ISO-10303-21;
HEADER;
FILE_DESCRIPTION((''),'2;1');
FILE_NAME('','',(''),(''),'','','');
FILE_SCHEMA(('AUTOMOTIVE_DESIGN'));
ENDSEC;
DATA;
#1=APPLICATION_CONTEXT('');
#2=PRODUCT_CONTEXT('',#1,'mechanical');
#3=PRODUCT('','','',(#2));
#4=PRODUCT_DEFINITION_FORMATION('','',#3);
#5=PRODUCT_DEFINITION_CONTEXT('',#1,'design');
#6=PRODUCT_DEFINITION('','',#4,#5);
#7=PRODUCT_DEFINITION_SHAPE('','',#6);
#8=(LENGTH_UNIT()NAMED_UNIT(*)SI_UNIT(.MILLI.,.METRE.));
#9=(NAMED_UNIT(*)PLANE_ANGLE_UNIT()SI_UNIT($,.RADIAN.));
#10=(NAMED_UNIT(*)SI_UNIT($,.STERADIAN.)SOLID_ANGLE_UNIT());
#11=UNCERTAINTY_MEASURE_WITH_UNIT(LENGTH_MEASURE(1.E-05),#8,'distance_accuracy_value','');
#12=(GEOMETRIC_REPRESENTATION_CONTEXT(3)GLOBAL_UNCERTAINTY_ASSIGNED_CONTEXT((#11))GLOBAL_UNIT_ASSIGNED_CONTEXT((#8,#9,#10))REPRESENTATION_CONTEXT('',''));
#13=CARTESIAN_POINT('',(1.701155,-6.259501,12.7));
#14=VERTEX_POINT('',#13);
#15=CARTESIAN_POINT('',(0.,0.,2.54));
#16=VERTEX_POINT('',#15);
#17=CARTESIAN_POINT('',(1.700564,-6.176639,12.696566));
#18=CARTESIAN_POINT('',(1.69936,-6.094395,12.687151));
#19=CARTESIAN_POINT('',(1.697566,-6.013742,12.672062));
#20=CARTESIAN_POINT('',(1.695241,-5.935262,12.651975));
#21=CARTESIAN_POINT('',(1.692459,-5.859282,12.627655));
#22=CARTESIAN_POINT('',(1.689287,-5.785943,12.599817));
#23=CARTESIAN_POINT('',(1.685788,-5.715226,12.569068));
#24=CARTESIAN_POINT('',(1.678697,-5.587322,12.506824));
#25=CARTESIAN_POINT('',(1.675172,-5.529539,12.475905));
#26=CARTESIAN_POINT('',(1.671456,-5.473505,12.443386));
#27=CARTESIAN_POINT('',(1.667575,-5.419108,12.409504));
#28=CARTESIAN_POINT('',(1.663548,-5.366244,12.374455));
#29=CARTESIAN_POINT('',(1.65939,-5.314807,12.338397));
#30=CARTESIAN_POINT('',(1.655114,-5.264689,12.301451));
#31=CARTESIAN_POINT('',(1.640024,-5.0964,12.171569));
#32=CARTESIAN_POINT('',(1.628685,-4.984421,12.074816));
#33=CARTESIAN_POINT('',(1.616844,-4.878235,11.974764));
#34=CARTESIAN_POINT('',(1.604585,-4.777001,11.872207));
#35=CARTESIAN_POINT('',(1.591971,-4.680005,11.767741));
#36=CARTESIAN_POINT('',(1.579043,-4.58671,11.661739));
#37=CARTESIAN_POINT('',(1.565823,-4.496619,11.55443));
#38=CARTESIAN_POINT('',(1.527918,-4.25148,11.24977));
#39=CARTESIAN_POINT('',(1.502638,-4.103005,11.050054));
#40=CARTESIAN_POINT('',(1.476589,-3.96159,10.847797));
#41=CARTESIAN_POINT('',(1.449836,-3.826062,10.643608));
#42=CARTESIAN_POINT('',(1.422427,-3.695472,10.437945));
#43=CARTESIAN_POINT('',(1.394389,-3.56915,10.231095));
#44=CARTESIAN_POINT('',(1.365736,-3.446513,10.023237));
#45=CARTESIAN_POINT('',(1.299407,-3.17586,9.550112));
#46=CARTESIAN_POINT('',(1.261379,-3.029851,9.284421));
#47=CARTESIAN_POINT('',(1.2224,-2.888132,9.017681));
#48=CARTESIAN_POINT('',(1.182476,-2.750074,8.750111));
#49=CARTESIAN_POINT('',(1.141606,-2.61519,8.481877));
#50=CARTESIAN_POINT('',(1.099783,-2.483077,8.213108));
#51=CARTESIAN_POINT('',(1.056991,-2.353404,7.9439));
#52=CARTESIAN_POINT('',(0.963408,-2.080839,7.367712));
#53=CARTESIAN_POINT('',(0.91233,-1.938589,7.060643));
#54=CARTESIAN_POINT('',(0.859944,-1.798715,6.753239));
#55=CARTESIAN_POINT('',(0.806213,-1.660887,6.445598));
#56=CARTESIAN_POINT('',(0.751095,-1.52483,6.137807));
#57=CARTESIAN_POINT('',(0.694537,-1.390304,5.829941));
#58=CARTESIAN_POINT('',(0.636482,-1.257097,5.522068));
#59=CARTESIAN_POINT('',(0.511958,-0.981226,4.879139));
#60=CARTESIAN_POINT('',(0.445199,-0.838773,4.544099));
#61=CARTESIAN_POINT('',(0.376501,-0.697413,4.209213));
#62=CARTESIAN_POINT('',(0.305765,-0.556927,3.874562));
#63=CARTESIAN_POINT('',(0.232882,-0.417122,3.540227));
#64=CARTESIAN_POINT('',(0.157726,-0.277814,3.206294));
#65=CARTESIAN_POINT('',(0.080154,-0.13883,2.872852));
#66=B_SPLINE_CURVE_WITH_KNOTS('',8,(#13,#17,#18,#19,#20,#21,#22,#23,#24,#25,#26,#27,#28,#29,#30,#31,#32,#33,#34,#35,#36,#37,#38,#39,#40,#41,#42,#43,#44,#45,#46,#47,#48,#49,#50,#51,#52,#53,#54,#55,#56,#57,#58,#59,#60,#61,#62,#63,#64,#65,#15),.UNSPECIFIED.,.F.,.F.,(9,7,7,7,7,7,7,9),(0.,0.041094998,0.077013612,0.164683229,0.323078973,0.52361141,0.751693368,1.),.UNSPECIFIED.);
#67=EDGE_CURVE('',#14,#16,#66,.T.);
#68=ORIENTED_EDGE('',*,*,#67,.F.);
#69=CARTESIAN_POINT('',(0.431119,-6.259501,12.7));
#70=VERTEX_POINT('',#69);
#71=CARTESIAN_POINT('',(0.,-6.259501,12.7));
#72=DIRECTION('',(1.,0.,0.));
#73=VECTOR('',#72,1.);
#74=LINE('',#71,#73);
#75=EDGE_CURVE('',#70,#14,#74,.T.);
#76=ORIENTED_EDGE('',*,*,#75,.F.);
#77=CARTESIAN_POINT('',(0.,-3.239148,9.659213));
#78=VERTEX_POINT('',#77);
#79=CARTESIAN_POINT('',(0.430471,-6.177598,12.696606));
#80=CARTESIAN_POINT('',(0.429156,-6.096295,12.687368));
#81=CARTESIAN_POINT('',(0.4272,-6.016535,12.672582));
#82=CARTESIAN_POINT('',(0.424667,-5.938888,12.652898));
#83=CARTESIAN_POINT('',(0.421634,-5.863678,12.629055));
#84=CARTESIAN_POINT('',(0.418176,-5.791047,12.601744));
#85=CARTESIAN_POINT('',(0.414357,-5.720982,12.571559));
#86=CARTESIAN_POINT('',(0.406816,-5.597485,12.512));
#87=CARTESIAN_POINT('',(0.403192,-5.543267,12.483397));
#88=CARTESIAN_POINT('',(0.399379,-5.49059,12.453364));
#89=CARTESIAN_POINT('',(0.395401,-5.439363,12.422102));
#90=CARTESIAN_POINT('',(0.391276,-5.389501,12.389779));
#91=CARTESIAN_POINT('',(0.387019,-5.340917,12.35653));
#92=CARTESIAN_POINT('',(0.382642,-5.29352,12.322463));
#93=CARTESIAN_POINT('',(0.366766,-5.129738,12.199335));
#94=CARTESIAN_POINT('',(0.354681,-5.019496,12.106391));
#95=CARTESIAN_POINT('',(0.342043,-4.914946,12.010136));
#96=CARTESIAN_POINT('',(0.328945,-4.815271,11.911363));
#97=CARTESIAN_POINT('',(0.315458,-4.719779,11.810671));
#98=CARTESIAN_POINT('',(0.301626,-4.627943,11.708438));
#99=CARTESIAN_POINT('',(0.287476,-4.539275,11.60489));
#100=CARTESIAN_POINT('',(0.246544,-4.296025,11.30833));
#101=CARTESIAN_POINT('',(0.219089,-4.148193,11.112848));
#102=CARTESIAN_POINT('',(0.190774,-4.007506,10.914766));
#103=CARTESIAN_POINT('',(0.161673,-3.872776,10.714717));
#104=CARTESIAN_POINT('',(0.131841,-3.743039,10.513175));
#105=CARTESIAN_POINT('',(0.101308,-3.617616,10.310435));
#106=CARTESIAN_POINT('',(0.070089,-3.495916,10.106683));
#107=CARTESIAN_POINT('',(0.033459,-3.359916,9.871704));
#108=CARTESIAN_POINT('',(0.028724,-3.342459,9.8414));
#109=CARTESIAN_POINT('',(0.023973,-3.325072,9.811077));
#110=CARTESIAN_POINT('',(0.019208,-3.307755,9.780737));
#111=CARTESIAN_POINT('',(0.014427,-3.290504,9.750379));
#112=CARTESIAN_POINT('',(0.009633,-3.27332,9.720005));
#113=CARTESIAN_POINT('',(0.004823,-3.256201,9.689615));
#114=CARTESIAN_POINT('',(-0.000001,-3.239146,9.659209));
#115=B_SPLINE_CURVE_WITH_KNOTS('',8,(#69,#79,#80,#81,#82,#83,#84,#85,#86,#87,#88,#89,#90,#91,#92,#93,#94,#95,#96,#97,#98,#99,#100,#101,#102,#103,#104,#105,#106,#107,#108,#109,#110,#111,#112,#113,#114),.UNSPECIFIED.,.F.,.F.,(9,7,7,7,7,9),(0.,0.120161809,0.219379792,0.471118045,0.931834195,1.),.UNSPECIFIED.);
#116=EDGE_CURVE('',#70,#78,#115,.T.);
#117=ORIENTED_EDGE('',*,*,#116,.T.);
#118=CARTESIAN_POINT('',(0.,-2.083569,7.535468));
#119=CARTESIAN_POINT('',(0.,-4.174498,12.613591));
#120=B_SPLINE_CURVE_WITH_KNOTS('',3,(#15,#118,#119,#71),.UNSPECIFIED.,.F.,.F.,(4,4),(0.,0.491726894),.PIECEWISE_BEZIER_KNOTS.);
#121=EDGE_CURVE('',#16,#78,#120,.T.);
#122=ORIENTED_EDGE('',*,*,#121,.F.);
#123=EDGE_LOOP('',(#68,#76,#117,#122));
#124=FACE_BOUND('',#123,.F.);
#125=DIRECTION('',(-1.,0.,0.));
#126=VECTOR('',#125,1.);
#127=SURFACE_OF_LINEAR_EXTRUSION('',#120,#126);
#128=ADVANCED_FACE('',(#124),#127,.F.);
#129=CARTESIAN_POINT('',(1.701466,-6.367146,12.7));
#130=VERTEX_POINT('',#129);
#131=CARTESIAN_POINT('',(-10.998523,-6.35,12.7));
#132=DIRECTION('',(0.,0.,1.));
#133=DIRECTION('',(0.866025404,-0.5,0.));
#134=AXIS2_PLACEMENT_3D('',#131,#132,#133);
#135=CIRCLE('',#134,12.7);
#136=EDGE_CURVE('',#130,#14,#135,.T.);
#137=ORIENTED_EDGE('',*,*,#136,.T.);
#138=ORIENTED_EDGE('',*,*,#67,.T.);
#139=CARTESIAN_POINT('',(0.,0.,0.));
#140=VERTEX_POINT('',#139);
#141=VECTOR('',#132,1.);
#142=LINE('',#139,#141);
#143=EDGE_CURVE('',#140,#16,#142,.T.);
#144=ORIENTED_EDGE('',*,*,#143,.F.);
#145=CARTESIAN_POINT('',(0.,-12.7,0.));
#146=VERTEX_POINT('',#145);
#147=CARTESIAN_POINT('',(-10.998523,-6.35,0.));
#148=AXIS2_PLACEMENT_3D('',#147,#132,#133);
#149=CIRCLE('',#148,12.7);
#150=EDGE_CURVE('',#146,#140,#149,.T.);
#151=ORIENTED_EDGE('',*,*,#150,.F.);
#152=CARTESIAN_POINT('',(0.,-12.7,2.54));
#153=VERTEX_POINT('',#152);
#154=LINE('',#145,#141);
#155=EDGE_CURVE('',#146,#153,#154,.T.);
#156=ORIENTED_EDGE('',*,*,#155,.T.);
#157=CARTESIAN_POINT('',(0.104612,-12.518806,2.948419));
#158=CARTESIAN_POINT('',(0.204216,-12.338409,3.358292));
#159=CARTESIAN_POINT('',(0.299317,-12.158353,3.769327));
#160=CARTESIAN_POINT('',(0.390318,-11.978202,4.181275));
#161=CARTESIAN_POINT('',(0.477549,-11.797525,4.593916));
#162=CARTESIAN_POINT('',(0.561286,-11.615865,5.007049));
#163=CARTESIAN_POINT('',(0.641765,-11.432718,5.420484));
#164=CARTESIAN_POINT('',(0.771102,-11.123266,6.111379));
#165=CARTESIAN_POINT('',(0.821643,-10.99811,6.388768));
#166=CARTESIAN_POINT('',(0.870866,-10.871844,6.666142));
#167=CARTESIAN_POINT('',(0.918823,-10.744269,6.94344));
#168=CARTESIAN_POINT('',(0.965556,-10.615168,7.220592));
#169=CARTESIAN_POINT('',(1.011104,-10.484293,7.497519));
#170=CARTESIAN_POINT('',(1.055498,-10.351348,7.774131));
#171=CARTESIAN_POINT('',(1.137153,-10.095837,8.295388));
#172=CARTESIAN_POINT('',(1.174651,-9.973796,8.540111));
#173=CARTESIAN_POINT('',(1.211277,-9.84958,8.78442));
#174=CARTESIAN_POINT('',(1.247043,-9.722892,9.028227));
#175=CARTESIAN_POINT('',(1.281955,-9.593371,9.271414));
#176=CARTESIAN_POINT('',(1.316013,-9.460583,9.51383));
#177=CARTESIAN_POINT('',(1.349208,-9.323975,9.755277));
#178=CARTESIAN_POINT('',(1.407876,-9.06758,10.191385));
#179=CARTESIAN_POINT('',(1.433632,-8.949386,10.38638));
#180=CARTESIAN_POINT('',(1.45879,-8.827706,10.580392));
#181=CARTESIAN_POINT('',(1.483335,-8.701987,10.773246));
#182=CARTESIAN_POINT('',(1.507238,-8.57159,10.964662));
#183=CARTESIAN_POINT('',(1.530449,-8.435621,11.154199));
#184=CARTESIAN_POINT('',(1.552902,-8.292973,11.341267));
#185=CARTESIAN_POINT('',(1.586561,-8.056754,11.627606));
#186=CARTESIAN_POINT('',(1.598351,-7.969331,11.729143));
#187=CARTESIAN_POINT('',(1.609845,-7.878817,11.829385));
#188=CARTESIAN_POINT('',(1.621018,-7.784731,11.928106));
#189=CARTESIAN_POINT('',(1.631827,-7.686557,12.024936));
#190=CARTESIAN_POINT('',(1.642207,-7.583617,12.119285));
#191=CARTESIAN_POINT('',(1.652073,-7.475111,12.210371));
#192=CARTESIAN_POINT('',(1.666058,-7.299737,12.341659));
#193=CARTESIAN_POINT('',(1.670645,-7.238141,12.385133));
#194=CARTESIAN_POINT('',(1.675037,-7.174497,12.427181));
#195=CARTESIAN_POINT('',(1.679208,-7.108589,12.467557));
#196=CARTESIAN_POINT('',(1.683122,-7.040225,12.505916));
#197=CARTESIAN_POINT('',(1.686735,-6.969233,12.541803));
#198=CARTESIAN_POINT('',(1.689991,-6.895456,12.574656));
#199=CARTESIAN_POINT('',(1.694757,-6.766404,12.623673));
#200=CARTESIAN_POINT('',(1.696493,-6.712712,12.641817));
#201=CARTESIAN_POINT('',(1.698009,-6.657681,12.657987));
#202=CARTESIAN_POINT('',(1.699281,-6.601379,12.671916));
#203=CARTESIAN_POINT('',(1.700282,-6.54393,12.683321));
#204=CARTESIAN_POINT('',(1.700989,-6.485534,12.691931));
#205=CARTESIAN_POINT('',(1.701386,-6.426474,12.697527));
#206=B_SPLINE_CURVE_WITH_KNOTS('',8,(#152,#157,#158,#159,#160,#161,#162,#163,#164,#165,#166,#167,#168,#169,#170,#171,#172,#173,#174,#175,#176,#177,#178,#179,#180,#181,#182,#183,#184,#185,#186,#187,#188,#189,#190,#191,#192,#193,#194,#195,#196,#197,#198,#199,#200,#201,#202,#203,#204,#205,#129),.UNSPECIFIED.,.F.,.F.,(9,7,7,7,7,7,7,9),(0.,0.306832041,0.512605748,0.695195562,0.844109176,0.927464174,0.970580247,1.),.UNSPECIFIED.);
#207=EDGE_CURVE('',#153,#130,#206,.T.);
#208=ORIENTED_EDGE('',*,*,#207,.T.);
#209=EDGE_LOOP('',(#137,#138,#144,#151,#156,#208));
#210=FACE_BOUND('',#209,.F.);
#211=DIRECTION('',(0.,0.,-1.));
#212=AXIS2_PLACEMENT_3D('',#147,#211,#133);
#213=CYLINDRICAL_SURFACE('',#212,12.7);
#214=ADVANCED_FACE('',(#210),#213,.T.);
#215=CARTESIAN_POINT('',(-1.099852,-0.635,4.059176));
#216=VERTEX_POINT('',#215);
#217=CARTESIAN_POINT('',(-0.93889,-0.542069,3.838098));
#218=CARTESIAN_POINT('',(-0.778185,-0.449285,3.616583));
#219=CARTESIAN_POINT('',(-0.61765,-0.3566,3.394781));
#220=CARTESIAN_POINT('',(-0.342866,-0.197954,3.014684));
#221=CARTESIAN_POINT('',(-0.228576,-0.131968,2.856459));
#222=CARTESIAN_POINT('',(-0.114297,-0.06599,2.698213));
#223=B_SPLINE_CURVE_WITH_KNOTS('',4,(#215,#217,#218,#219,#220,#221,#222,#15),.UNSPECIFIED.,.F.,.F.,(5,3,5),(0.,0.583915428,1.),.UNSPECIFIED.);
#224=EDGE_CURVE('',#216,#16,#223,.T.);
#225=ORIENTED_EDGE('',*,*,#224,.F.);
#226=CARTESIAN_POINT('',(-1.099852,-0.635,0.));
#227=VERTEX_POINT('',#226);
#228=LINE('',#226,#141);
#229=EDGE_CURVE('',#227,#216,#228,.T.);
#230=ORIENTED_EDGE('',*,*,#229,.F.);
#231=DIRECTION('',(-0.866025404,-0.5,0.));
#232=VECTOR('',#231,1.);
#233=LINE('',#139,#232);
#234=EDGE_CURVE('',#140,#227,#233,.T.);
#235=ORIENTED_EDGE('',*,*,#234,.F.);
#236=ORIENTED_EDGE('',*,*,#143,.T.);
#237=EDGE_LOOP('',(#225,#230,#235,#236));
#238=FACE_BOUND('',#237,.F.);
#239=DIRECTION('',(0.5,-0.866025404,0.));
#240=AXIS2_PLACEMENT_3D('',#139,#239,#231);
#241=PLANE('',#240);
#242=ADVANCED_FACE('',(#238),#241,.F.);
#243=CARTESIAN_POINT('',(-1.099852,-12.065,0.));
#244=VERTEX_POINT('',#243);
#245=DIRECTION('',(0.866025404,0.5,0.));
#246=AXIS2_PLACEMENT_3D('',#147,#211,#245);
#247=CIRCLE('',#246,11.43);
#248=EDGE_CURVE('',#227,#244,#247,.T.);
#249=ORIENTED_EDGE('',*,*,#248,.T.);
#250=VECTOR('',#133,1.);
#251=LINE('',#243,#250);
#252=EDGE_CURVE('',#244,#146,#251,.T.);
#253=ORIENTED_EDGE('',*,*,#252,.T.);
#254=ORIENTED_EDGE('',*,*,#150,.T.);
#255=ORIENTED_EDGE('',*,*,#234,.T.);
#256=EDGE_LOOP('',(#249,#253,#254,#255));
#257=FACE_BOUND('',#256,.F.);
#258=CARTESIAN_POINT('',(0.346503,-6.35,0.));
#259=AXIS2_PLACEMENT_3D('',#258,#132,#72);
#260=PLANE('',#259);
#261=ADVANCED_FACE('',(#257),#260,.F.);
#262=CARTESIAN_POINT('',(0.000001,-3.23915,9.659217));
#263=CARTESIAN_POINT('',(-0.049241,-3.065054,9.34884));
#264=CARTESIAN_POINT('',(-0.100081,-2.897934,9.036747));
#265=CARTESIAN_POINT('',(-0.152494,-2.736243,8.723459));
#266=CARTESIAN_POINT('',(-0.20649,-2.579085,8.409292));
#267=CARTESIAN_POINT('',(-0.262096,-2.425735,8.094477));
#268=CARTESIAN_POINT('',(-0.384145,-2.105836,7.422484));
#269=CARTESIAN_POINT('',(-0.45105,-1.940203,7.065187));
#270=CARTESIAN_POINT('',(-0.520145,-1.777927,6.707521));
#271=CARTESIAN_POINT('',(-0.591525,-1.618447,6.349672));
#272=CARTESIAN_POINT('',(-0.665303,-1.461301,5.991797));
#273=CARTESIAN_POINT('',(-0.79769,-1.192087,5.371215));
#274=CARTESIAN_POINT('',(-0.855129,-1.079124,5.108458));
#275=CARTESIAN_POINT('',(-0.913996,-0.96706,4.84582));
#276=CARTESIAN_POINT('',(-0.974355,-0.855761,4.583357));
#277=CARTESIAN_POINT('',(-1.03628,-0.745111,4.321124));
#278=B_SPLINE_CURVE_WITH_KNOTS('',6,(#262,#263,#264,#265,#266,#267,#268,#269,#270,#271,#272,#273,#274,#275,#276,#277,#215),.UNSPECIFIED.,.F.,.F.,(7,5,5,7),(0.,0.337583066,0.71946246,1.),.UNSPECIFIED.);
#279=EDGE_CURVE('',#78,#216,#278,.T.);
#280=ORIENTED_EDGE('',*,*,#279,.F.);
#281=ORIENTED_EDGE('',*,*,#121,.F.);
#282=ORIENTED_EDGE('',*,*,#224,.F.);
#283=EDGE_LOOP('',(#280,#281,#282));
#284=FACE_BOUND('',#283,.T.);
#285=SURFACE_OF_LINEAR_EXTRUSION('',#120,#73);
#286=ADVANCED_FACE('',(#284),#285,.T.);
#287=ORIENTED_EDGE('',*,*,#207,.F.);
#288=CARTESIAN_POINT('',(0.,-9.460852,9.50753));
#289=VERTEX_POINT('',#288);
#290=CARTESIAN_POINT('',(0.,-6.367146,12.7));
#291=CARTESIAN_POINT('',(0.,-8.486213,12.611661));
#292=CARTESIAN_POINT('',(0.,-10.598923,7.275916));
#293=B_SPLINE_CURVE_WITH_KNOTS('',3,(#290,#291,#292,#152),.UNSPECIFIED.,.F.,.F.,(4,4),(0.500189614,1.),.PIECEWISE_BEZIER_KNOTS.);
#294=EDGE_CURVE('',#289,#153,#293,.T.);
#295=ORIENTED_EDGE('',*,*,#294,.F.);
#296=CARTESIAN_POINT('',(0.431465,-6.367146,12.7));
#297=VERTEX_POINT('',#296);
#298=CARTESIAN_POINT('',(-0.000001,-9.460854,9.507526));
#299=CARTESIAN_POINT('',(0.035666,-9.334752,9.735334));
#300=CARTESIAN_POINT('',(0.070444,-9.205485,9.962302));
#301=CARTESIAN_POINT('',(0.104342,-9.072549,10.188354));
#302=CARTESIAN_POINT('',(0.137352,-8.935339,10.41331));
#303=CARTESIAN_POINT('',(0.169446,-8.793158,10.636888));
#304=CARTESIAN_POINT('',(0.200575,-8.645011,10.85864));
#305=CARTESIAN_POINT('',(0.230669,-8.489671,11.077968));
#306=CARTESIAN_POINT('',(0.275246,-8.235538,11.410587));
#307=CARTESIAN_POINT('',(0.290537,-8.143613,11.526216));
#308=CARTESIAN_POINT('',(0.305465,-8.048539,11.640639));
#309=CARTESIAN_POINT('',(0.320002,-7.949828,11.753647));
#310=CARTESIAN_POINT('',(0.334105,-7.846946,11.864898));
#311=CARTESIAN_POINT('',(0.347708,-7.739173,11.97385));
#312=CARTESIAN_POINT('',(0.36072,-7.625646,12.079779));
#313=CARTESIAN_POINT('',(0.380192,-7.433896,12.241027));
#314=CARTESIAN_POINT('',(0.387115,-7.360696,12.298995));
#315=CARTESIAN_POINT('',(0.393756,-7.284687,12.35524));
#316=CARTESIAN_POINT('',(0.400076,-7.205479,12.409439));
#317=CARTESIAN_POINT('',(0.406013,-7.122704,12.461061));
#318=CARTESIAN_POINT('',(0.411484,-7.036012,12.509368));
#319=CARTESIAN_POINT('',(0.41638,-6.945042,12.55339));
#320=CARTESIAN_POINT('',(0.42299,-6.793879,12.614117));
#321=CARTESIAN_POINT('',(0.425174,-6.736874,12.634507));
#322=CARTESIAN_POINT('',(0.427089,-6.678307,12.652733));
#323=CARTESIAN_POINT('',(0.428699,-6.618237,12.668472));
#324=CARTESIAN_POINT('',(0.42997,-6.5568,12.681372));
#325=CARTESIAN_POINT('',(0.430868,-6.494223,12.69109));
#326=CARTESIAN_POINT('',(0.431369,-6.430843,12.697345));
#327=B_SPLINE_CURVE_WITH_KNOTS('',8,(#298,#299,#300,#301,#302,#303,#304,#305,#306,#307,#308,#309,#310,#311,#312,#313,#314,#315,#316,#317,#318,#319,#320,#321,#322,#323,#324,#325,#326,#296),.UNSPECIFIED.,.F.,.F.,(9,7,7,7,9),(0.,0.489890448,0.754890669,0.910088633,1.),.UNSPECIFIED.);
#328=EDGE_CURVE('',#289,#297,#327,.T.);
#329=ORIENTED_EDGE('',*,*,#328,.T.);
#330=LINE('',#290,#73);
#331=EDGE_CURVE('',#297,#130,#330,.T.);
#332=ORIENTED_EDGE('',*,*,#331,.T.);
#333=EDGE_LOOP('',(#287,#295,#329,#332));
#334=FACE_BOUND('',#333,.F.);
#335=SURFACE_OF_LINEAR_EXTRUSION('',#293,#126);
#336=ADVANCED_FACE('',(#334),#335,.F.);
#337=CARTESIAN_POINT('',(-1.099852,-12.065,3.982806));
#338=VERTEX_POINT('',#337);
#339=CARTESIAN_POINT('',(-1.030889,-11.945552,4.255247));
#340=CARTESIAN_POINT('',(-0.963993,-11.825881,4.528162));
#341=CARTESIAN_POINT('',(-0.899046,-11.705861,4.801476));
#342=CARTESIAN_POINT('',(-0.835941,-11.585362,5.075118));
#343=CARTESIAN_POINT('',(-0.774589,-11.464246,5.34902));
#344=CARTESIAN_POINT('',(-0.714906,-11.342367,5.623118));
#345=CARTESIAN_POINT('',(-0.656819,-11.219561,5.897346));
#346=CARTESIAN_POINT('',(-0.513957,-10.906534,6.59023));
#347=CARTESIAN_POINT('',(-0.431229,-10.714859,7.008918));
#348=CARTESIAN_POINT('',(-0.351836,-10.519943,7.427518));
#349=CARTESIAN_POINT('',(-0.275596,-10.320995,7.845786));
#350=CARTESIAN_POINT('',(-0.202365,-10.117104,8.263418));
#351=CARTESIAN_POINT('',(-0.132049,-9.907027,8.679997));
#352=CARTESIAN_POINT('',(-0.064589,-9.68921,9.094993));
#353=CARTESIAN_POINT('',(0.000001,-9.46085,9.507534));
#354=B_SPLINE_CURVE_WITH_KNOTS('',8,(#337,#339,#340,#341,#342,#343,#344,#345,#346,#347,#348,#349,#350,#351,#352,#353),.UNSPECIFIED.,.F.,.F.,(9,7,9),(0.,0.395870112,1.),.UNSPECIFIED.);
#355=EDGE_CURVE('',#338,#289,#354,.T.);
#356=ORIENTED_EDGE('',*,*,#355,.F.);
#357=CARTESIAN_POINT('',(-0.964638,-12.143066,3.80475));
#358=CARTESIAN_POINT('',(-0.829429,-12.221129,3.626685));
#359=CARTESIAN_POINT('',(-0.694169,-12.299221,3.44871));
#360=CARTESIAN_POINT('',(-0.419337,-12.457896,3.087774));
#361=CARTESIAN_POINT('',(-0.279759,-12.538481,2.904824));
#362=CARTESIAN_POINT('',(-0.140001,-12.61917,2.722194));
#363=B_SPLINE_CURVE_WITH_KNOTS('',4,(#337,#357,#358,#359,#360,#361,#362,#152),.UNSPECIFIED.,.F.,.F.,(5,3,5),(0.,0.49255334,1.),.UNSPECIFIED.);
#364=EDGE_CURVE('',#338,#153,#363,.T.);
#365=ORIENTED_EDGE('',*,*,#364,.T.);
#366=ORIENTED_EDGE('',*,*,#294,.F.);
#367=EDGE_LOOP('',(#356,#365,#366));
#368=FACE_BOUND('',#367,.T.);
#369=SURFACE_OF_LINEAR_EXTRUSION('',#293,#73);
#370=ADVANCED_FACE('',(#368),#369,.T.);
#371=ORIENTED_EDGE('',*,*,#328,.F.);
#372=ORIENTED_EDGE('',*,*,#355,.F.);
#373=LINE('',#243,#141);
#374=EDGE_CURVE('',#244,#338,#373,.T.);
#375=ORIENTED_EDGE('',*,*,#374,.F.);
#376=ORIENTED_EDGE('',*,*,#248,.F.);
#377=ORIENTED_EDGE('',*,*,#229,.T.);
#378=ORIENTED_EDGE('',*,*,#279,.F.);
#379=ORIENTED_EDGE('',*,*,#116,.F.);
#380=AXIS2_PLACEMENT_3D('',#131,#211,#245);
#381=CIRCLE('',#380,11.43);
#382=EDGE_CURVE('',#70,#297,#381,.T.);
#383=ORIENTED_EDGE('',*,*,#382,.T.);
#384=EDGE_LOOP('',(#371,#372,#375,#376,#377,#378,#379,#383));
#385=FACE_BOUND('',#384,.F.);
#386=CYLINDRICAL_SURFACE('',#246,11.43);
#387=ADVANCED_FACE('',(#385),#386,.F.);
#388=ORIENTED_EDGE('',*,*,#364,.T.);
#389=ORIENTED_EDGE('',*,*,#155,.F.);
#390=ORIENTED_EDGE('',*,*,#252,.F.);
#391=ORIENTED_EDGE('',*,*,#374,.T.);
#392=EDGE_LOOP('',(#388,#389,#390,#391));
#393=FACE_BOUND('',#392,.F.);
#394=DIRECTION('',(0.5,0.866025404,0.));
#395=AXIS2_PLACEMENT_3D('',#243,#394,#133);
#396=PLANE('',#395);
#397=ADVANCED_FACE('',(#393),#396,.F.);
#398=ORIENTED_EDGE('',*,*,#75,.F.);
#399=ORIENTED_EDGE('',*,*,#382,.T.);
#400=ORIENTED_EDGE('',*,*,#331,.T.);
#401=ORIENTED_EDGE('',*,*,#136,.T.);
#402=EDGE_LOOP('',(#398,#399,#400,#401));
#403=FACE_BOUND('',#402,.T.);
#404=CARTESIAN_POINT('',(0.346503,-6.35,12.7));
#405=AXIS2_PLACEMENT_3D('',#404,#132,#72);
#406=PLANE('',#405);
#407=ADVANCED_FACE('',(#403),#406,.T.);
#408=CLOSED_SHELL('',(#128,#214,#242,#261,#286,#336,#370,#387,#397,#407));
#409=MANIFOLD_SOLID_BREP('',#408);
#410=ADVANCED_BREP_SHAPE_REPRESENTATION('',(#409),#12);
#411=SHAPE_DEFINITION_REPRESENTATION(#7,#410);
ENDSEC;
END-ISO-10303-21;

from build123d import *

# Parameters (mm, degrees)
F1_DEPTH = 12.7
F3_DEPTH = 6.35


# Not quite as in the source:
# - a feature names something its author has since deleted; it is built from what else it names


with BuildPart() as f1:
    # F0 (on Top) → F1 (new body)
    with BuildSketch(Plane.XY):
        with BuildLine():
            Line((-1.099852253, -12.0650000057), (0, -12.7))
            ThreePointArc((0, -12.7), (1.7014773719, -6.35), (0, 0))
            Line((0, 0), (-1.099852253, -0.6349999943))
            ThreePointArc((-1.099852253, -0.6349999943), (0.4314773832, -6.35), (-1.099852253, -12.0650000057))
        make_face()
    extrude(amount=F1_DEPTH)

    # F2 (on Right) → F3 (cut, symmetric)
    with BuildSketch(Plane.YZ):
        with BuildLine():
            Line((0, 12.7), (-6.259501017, 12.7))
            add(Edge.make_bspline(
                [(0, 2.54), (-2.0835692993, 7.5354677351), (-4.1744975267, 12.6135905998), (-6.259501017, 12.7)],
                knots=[0, 0, 0, 0, 0.4917268941, 0.4917268941, 0.4917268941, 0.4917268941], degree=3))
            Line((0, 2.54), (0, 12.7))
        make_face()
        with BuildLine():
            add(Edge.make_bspline(
                [(-6.259501017, 12.7), (-6.2953843519, 12.7014871234), (-6.331265932, 12.7014957456), (-6.3671456895, 12.7)],
                knots=[0.4917268941, 0.4917268941, 0.4917268941, 0.4917268941, 0.5001896141, 0.5001896141, 0.5001896141, 0.5001896141], degree=3))
            Line((-6.3671456895, 12.7), (-6.259501017, 12.7))
        make_face()
        with BuildLine():
            add(Edge.make_bspline(
                [(-6.3671456895, 12.7), (-8.4862132407, 12.6116608867), (-10.5989234677, 7.2759161441), (-12.7, 2.54)],
                knots=[0.5001896141, 0.5001896141, 0.5001896141, 0.5001896141, 1, 1, 1, 1], degree=3))
            Line((-6.3671456895, 12.7), (-12.7, 12.7))
            Line((-12.7, 12.7), (-12.7, 2.54))
        make_face()
    extrude(amount=F3_DEPTH, both=True, mode=Mode.SUBTRACT)


solid = f1.part
